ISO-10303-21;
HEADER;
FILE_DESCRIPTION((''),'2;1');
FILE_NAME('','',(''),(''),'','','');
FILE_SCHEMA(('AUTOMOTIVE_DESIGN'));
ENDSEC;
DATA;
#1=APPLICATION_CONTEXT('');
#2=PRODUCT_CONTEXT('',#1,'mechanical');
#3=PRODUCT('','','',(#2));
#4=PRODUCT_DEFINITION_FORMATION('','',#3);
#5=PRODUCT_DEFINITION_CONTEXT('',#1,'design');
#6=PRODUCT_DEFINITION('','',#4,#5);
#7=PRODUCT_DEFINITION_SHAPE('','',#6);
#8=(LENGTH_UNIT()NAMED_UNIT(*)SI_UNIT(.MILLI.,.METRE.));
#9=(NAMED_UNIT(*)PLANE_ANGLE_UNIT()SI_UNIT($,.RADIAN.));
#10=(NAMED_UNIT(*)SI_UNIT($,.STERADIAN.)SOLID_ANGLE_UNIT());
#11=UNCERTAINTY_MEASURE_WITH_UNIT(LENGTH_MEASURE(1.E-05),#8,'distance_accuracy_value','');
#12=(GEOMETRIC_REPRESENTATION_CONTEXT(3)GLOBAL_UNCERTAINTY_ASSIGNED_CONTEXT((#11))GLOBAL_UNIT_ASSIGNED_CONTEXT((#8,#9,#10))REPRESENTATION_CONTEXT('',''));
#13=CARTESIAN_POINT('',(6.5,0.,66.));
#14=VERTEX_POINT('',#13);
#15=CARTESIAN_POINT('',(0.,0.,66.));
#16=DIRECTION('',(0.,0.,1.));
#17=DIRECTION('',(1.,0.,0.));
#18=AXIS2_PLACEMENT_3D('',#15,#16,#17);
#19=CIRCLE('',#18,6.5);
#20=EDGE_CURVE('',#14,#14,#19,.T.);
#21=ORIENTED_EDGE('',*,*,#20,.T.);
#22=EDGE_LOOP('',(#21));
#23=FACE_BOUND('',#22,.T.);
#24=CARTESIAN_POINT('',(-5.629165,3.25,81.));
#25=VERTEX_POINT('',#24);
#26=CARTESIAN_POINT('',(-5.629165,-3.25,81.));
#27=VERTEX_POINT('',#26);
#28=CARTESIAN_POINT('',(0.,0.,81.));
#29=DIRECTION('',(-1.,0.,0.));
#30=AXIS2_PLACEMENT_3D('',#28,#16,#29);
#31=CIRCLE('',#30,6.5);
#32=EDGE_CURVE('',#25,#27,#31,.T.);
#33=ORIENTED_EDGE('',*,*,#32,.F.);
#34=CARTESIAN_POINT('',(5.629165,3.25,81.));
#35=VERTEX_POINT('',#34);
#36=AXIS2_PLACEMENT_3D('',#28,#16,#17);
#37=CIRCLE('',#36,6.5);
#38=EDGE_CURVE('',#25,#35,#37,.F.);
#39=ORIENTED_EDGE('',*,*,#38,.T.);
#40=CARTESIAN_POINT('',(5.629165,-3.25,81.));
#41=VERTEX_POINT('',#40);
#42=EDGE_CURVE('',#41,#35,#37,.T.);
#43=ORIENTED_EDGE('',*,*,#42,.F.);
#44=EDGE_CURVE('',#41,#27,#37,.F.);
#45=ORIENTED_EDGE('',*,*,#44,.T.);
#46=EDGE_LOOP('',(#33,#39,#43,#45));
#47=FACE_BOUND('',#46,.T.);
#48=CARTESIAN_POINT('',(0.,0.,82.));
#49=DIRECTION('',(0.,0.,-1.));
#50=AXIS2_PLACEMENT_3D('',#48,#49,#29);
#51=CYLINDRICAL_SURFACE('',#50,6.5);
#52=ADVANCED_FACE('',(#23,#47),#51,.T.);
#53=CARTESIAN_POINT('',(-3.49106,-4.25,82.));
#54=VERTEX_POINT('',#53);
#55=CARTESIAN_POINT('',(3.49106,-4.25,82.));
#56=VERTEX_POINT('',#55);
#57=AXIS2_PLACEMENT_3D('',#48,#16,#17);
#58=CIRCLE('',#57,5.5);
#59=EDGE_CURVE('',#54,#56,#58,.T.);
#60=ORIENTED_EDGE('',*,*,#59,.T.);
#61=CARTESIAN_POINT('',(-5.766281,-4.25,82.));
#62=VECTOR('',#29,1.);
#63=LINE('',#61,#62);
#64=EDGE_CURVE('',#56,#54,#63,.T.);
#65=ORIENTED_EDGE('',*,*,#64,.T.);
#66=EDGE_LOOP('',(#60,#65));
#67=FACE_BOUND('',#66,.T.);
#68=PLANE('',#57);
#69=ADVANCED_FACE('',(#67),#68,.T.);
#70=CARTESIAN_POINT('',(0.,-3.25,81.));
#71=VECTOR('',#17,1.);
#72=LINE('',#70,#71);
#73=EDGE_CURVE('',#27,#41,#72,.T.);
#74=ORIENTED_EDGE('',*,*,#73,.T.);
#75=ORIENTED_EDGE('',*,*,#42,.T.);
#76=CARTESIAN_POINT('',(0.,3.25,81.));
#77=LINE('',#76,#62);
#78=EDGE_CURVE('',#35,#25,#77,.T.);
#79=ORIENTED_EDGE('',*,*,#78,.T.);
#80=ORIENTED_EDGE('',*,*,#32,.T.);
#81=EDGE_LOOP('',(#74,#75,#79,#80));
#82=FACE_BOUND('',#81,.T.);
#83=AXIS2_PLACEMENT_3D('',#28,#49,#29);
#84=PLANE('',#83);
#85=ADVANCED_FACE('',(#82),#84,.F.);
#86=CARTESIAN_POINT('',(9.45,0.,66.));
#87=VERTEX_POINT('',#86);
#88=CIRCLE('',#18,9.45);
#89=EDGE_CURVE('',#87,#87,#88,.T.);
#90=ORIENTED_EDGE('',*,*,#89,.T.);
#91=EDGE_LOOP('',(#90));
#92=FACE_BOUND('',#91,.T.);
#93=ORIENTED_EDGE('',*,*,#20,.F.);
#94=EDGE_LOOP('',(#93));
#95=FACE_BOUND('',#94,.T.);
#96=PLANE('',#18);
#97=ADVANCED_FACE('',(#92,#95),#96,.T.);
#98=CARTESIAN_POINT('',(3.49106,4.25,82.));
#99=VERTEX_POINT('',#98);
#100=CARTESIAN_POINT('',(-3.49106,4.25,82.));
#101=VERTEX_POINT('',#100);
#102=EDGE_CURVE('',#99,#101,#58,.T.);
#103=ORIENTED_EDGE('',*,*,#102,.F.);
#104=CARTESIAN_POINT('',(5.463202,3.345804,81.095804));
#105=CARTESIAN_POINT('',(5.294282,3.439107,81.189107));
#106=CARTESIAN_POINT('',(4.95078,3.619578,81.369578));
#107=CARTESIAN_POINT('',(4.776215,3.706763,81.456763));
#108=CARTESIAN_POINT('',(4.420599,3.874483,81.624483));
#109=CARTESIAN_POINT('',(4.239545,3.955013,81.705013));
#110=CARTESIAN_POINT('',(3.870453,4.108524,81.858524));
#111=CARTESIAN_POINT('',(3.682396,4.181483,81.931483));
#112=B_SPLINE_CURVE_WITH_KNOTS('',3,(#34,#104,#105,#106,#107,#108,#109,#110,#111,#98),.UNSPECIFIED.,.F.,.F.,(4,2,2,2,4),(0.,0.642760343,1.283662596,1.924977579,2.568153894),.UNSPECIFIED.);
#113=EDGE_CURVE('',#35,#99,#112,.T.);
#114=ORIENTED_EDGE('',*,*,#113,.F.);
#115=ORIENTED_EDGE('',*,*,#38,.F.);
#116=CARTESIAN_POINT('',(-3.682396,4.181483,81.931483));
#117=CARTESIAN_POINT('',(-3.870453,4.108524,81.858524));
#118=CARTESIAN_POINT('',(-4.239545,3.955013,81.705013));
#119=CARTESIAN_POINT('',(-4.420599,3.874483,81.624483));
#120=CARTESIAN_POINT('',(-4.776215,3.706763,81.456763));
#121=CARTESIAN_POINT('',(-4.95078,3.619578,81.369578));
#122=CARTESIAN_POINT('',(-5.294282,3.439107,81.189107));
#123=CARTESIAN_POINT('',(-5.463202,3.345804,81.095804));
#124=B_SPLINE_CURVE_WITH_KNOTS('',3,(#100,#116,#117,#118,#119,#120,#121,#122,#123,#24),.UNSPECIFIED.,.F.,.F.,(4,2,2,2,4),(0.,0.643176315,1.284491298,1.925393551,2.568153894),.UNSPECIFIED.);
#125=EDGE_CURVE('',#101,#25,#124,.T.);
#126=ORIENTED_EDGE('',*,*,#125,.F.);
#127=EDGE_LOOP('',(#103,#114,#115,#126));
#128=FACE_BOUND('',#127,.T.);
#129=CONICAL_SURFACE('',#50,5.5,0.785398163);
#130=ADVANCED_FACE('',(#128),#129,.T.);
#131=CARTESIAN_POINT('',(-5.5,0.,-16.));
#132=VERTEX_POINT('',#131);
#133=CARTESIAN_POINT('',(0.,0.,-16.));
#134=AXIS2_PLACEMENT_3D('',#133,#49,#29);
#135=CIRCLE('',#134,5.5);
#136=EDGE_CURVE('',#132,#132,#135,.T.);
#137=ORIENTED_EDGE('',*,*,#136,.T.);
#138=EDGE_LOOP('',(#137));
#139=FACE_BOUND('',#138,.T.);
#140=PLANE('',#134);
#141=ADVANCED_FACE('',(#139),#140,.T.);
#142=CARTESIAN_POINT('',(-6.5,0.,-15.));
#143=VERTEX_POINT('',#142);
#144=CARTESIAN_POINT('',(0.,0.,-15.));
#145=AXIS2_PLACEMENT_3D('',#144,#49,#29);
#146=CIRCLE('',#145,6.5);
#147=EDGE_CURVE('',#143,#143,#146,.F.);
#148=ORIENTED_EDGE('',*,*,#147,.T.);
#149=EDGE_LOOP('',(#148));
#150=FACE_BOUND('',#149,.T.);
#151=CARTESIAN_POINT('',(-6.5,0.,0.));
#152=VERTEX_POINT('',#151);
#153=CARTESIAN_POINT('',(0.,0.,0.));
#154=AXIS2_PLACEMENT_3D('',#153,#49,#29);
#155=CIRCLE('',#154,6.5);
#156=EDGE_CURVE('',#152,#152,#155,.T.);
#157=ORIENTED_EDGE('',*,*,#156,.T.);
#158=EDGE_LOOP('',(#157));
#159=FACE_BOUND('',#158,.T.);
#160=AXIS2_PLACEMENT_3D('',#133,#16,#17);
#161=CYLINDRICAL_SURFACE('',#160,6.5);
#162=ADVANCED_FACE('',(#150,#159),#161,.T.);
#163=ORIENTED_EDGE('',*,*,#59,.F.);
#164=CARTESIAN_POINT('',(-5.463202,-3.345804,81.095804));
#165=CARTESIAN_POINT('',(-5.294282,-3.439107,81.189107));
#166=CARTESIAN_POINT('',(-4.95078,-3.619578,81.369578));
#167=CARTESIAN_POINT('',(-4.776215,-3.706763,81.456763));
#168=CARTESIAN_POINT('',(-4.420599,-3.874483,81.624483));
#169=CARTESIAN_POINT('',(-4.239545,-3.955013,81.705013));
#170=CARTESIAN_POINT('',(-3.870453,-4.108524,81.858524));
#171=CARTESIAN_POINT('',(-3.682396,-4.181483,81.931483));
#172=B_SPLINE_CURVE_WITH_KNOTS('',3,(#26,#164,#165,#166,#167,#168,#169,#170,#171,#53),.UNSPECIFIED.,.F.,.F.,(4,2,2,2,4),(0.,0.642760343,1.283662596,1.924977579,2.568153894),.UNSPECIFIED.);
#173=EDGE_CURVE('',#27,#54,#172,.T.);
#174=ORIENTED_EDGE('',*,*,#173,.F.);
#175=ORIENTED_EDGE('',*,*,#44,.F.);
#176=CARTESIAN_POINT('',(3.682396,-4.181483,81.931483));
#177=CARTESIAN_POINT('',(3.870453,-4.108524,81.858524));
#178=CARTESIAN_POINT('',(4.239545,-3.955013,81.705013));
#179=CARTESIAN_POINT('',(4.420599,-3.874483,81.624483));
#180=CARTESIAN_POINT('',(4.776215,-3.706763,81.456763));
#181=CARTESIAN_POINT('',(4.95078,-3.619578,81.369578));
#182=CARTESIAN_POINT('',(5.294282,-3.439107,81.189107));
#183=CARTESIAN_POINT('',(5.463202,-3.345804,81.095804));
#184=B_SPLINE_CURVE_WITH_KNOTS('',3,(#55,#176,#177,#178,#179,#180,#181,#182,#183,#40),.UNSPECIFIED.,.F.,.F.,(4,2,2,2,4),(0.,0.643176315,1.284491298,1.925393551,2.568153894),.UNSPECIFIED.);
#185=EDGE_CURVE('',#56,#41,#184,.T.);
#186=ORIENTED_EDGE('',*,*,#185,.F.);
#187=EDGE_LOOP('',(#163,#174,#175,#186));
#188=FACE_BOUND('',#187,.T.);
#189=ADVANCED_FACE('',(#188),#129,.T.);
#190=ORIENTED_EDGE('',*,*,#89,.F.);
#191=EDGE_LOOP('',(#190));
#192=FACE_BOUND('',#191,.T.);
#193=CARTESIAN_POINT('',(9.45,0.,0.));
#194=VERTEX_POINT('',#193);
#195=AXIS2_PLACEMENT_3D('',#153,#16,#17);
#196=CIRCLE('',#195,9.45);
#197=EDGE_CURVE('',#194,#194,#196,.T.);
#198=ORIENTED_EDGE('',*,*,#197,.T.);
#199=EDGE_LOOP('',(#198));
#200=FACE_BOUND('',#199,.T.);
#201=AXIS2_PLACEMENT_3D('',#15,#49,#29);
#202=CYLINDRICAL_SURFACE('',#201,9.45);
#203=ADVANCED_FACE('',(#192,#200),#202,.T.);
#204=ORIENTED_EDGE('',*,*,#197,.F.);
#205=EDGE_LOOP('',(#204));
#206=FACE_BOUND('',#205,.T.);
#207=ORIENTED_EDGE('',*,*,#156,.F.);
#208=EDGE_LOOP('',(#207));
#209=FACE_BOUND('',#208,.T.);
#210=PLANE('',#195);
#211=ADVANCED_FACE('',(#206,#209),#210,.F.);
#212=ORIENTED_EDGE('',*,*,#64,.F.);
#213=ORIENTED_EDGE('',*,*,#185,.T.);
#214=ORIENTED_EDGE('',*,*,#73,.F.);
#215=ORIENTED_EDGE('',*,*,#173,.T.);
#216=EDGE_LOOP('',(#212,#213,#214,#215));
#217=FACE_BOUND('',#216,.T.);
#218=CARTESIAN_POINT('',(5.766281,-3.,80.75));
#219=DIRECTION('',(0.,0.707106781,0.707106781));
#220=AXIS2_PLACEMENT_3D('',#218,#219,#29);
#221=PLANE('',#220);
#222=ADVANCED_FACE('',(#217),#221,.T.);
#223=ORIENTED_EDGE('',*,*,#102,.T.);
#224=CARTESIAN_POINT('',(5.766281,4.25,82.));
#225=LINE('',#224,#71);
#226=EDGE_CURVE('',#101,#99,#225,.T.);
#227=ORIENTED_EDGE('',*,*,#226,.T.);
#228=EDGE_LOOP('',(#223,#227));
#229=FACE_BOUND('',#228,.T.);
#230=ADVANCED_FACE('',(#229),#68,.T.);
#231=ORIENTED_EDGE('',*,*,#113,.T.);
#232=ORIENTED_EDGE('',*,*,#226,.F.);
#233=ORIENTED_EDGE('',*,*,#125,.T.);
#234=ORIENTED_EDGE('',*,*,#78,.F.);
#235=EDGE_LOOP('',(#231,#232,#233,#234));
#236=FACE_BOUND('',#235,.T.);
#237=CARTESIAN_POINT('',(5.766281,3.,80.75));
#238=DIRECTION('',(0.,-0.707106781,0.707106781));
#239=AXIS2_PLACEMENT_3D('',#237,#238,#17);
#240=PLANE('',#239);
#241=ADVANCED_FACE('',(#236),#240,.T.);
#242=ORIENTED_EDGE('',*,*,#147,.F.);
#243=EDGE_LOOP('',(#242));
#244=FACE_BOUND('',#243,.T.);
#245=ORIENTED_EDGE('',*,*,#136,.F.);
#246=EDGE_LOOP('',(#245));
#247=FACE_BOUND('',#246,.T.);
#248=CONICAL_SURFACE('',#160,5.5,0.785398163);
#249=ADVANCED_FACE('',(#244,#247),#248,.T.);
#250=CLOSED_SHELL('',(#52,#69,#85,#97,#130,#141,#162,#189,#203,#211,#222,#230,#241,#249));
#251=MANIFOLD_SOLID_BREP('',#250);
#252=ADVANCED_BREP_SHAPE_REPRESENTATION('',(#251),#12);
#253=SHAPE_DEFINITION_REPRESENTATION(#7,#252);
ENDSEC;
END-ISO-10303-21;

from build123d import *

# Parameters (mm, degrees)
CROQUIS1_R              = 9.45
SALIENTE_EXTRUIR1_DEPTH = 66
CROQUIS7_R              = 6.5
SALIENTE_EXTRUIR5_DEPTH = 16
CHAFL_N5_SIZE           = 1
SALIENTE_EXTRUIR6_START = 16
CROQUIS12_R             = 6.5
SALIENTE_EXTRUIR6_DEPTH = 16
CORTAR_EXTRUIR12_DEPTH  = 1
CHAFL_N7_SIZE           = 1.25
CHAFL_N8_SIZE           = 1.25
CHAFL_N9_SIZE           = 1
CHAFL_N10_SIZE          = 1


with BuildPart() as part:
    # Croquis1 → Saliente-Extruir1 (new body)
    with BuildSketch(Plane.XY):
        Circle(CROQUIS1_R)
    extrude(amount=SALIENTE_EXTRUIR1_DEPTH)

    # Croquis7 → Saliente-Extruir5 (add)
    with BuildSketch(Plane(origin=(0, 0, 0), x_dir=(-1, 0, 0), z_dir=(0, 0, -1))):
        Circle(CROQUIS7_R)
    extrude(amount=SALIENTE_EXTRUIR5_DEPTH)

    # Chaflán5
    chafl_n5_edges = [part.edges().sort_by_distance(p)[0] for p in [
        (6.5, 0, -16),
    ]]
    chamfer(chafl_n5_edges, length=CHAFL_N5_SIZE)

    # Croquis12 → Saliente-Extruir6 (add)
    with BuildSketch(Plane.XY.offset(66).offset(SALIENTE_EXTRUIR6_START)):
        with Locations(Location((0, 0, 0), (0, 0, 180))):
            Circle(CROQUIS12_R)
    extrude(amount=-SALIENTE_EXTRUIR6_DEPTH)

    # Croquis13 → Cortar-Extruir12 (cut)
    with BuildSketch(Plane.XY.offset(82)):
        with BuildLine():
            Line((5.766281297, -3), (-5.766281297, -3))
            ThreePointArc((-5.766281297, -3), (-6.5, 0), (-5.766281297, 3))
            Line((-5.766281297, 3), (5.766281297, 3))
            ThreePointArc((5.766281297, 3), (6.5, 0), (5.766281297, -3))
        make_face()
    extrude(amount=-CORTAR_EXTRUIR12_DEPTH, mode=Mode.SUBTRACT)

    # Chaflán7
    # the kernel refuses this chamfer: 1.25 mm, written as the material it takes off along each edge
    with BuildSketch(Plane(origin=(-8.980885032, 3, 82), x_dir=(0, -0.02749587661058643, -0.9996219169112968), z_dir=(1, 0, 0))) as chafl_n7_piece_1_section:
        Polygon((CHAFL_N7_SIZE * 0.999621916911, CHAFL_N7_SIZE * 0.0274958766106), (-CHAFL_N7_SIZE * 0.0274958766106, CHAFL_N7_SIZE * 0.999621916911), (0, 0), align=None)
    chafl_n7_piece_1 = extrude(amount=17.961770065, mode=Mode.PRIVATE)
    chafl_n7_piece_1 = split(chafl_n7_piece_1, bisect_by=Plane(origin=(0, 3.432148015, 81), z_dir=(0, 0, 1)), keep=Keep.TOP, mode=Mode.PRIVATE)
    add(chafl_n7_piece_1, mode=Mode.SUBTRACT)

    # Chaflán8
    # the kernel refuses this chamfer: 1.25 mm, written as the material it takes off along each edge
    with BuildSketch(Plane(origin=(8.980885032, -3, 82), x_dir=(0, -0.9996219169112969, 0.027495876610582178), z_dir=(-1, 0, 0))) as chafl_n8_piece_1_section:
        Polygon((CHAFL_N8_SIZE * 0.999621916911, -CHAFL_N8_SIZE * 0.0274958766106), (-CHAFL_N8_SIZE * 0.0274958766106, -CHAFL_N8_SIZE * 0.999621916911), (0, 0), align=None)
    chafl_n8_piece_1 = extrude(amount=17.961770065, mode=Mode.PRIVATE)
    chafl_n8_piece_1 = split(chafl_n8_piece_1, bisect_by=Plane(origin=(0, -3.432148015, 81), z_dir=(0, 0, 1)), keep=Keep.TOP, mode=Mode.PRIVATE)
    add(chafl_n8_piece_1, mode=Mode.SUBTRACT)

    # Chaflán9
    chafl_n9_edges = [part.edges().sort_by_distance(p)[0] for p in [
        (0, 6.5, 82),
    ]]
    chamfer(chafl_n9_edges, length=CHAFL_N9_SIZE)

    # Chaflán10
    chafl_n10_edges = [part.edges().sort_by_distance(p)[0] for p in [
        (0, -6.5, 82),
    ]]
    chamfer(chafl_n10_edges, length=CHAFL_N10_SIZE)


solid = part.part
